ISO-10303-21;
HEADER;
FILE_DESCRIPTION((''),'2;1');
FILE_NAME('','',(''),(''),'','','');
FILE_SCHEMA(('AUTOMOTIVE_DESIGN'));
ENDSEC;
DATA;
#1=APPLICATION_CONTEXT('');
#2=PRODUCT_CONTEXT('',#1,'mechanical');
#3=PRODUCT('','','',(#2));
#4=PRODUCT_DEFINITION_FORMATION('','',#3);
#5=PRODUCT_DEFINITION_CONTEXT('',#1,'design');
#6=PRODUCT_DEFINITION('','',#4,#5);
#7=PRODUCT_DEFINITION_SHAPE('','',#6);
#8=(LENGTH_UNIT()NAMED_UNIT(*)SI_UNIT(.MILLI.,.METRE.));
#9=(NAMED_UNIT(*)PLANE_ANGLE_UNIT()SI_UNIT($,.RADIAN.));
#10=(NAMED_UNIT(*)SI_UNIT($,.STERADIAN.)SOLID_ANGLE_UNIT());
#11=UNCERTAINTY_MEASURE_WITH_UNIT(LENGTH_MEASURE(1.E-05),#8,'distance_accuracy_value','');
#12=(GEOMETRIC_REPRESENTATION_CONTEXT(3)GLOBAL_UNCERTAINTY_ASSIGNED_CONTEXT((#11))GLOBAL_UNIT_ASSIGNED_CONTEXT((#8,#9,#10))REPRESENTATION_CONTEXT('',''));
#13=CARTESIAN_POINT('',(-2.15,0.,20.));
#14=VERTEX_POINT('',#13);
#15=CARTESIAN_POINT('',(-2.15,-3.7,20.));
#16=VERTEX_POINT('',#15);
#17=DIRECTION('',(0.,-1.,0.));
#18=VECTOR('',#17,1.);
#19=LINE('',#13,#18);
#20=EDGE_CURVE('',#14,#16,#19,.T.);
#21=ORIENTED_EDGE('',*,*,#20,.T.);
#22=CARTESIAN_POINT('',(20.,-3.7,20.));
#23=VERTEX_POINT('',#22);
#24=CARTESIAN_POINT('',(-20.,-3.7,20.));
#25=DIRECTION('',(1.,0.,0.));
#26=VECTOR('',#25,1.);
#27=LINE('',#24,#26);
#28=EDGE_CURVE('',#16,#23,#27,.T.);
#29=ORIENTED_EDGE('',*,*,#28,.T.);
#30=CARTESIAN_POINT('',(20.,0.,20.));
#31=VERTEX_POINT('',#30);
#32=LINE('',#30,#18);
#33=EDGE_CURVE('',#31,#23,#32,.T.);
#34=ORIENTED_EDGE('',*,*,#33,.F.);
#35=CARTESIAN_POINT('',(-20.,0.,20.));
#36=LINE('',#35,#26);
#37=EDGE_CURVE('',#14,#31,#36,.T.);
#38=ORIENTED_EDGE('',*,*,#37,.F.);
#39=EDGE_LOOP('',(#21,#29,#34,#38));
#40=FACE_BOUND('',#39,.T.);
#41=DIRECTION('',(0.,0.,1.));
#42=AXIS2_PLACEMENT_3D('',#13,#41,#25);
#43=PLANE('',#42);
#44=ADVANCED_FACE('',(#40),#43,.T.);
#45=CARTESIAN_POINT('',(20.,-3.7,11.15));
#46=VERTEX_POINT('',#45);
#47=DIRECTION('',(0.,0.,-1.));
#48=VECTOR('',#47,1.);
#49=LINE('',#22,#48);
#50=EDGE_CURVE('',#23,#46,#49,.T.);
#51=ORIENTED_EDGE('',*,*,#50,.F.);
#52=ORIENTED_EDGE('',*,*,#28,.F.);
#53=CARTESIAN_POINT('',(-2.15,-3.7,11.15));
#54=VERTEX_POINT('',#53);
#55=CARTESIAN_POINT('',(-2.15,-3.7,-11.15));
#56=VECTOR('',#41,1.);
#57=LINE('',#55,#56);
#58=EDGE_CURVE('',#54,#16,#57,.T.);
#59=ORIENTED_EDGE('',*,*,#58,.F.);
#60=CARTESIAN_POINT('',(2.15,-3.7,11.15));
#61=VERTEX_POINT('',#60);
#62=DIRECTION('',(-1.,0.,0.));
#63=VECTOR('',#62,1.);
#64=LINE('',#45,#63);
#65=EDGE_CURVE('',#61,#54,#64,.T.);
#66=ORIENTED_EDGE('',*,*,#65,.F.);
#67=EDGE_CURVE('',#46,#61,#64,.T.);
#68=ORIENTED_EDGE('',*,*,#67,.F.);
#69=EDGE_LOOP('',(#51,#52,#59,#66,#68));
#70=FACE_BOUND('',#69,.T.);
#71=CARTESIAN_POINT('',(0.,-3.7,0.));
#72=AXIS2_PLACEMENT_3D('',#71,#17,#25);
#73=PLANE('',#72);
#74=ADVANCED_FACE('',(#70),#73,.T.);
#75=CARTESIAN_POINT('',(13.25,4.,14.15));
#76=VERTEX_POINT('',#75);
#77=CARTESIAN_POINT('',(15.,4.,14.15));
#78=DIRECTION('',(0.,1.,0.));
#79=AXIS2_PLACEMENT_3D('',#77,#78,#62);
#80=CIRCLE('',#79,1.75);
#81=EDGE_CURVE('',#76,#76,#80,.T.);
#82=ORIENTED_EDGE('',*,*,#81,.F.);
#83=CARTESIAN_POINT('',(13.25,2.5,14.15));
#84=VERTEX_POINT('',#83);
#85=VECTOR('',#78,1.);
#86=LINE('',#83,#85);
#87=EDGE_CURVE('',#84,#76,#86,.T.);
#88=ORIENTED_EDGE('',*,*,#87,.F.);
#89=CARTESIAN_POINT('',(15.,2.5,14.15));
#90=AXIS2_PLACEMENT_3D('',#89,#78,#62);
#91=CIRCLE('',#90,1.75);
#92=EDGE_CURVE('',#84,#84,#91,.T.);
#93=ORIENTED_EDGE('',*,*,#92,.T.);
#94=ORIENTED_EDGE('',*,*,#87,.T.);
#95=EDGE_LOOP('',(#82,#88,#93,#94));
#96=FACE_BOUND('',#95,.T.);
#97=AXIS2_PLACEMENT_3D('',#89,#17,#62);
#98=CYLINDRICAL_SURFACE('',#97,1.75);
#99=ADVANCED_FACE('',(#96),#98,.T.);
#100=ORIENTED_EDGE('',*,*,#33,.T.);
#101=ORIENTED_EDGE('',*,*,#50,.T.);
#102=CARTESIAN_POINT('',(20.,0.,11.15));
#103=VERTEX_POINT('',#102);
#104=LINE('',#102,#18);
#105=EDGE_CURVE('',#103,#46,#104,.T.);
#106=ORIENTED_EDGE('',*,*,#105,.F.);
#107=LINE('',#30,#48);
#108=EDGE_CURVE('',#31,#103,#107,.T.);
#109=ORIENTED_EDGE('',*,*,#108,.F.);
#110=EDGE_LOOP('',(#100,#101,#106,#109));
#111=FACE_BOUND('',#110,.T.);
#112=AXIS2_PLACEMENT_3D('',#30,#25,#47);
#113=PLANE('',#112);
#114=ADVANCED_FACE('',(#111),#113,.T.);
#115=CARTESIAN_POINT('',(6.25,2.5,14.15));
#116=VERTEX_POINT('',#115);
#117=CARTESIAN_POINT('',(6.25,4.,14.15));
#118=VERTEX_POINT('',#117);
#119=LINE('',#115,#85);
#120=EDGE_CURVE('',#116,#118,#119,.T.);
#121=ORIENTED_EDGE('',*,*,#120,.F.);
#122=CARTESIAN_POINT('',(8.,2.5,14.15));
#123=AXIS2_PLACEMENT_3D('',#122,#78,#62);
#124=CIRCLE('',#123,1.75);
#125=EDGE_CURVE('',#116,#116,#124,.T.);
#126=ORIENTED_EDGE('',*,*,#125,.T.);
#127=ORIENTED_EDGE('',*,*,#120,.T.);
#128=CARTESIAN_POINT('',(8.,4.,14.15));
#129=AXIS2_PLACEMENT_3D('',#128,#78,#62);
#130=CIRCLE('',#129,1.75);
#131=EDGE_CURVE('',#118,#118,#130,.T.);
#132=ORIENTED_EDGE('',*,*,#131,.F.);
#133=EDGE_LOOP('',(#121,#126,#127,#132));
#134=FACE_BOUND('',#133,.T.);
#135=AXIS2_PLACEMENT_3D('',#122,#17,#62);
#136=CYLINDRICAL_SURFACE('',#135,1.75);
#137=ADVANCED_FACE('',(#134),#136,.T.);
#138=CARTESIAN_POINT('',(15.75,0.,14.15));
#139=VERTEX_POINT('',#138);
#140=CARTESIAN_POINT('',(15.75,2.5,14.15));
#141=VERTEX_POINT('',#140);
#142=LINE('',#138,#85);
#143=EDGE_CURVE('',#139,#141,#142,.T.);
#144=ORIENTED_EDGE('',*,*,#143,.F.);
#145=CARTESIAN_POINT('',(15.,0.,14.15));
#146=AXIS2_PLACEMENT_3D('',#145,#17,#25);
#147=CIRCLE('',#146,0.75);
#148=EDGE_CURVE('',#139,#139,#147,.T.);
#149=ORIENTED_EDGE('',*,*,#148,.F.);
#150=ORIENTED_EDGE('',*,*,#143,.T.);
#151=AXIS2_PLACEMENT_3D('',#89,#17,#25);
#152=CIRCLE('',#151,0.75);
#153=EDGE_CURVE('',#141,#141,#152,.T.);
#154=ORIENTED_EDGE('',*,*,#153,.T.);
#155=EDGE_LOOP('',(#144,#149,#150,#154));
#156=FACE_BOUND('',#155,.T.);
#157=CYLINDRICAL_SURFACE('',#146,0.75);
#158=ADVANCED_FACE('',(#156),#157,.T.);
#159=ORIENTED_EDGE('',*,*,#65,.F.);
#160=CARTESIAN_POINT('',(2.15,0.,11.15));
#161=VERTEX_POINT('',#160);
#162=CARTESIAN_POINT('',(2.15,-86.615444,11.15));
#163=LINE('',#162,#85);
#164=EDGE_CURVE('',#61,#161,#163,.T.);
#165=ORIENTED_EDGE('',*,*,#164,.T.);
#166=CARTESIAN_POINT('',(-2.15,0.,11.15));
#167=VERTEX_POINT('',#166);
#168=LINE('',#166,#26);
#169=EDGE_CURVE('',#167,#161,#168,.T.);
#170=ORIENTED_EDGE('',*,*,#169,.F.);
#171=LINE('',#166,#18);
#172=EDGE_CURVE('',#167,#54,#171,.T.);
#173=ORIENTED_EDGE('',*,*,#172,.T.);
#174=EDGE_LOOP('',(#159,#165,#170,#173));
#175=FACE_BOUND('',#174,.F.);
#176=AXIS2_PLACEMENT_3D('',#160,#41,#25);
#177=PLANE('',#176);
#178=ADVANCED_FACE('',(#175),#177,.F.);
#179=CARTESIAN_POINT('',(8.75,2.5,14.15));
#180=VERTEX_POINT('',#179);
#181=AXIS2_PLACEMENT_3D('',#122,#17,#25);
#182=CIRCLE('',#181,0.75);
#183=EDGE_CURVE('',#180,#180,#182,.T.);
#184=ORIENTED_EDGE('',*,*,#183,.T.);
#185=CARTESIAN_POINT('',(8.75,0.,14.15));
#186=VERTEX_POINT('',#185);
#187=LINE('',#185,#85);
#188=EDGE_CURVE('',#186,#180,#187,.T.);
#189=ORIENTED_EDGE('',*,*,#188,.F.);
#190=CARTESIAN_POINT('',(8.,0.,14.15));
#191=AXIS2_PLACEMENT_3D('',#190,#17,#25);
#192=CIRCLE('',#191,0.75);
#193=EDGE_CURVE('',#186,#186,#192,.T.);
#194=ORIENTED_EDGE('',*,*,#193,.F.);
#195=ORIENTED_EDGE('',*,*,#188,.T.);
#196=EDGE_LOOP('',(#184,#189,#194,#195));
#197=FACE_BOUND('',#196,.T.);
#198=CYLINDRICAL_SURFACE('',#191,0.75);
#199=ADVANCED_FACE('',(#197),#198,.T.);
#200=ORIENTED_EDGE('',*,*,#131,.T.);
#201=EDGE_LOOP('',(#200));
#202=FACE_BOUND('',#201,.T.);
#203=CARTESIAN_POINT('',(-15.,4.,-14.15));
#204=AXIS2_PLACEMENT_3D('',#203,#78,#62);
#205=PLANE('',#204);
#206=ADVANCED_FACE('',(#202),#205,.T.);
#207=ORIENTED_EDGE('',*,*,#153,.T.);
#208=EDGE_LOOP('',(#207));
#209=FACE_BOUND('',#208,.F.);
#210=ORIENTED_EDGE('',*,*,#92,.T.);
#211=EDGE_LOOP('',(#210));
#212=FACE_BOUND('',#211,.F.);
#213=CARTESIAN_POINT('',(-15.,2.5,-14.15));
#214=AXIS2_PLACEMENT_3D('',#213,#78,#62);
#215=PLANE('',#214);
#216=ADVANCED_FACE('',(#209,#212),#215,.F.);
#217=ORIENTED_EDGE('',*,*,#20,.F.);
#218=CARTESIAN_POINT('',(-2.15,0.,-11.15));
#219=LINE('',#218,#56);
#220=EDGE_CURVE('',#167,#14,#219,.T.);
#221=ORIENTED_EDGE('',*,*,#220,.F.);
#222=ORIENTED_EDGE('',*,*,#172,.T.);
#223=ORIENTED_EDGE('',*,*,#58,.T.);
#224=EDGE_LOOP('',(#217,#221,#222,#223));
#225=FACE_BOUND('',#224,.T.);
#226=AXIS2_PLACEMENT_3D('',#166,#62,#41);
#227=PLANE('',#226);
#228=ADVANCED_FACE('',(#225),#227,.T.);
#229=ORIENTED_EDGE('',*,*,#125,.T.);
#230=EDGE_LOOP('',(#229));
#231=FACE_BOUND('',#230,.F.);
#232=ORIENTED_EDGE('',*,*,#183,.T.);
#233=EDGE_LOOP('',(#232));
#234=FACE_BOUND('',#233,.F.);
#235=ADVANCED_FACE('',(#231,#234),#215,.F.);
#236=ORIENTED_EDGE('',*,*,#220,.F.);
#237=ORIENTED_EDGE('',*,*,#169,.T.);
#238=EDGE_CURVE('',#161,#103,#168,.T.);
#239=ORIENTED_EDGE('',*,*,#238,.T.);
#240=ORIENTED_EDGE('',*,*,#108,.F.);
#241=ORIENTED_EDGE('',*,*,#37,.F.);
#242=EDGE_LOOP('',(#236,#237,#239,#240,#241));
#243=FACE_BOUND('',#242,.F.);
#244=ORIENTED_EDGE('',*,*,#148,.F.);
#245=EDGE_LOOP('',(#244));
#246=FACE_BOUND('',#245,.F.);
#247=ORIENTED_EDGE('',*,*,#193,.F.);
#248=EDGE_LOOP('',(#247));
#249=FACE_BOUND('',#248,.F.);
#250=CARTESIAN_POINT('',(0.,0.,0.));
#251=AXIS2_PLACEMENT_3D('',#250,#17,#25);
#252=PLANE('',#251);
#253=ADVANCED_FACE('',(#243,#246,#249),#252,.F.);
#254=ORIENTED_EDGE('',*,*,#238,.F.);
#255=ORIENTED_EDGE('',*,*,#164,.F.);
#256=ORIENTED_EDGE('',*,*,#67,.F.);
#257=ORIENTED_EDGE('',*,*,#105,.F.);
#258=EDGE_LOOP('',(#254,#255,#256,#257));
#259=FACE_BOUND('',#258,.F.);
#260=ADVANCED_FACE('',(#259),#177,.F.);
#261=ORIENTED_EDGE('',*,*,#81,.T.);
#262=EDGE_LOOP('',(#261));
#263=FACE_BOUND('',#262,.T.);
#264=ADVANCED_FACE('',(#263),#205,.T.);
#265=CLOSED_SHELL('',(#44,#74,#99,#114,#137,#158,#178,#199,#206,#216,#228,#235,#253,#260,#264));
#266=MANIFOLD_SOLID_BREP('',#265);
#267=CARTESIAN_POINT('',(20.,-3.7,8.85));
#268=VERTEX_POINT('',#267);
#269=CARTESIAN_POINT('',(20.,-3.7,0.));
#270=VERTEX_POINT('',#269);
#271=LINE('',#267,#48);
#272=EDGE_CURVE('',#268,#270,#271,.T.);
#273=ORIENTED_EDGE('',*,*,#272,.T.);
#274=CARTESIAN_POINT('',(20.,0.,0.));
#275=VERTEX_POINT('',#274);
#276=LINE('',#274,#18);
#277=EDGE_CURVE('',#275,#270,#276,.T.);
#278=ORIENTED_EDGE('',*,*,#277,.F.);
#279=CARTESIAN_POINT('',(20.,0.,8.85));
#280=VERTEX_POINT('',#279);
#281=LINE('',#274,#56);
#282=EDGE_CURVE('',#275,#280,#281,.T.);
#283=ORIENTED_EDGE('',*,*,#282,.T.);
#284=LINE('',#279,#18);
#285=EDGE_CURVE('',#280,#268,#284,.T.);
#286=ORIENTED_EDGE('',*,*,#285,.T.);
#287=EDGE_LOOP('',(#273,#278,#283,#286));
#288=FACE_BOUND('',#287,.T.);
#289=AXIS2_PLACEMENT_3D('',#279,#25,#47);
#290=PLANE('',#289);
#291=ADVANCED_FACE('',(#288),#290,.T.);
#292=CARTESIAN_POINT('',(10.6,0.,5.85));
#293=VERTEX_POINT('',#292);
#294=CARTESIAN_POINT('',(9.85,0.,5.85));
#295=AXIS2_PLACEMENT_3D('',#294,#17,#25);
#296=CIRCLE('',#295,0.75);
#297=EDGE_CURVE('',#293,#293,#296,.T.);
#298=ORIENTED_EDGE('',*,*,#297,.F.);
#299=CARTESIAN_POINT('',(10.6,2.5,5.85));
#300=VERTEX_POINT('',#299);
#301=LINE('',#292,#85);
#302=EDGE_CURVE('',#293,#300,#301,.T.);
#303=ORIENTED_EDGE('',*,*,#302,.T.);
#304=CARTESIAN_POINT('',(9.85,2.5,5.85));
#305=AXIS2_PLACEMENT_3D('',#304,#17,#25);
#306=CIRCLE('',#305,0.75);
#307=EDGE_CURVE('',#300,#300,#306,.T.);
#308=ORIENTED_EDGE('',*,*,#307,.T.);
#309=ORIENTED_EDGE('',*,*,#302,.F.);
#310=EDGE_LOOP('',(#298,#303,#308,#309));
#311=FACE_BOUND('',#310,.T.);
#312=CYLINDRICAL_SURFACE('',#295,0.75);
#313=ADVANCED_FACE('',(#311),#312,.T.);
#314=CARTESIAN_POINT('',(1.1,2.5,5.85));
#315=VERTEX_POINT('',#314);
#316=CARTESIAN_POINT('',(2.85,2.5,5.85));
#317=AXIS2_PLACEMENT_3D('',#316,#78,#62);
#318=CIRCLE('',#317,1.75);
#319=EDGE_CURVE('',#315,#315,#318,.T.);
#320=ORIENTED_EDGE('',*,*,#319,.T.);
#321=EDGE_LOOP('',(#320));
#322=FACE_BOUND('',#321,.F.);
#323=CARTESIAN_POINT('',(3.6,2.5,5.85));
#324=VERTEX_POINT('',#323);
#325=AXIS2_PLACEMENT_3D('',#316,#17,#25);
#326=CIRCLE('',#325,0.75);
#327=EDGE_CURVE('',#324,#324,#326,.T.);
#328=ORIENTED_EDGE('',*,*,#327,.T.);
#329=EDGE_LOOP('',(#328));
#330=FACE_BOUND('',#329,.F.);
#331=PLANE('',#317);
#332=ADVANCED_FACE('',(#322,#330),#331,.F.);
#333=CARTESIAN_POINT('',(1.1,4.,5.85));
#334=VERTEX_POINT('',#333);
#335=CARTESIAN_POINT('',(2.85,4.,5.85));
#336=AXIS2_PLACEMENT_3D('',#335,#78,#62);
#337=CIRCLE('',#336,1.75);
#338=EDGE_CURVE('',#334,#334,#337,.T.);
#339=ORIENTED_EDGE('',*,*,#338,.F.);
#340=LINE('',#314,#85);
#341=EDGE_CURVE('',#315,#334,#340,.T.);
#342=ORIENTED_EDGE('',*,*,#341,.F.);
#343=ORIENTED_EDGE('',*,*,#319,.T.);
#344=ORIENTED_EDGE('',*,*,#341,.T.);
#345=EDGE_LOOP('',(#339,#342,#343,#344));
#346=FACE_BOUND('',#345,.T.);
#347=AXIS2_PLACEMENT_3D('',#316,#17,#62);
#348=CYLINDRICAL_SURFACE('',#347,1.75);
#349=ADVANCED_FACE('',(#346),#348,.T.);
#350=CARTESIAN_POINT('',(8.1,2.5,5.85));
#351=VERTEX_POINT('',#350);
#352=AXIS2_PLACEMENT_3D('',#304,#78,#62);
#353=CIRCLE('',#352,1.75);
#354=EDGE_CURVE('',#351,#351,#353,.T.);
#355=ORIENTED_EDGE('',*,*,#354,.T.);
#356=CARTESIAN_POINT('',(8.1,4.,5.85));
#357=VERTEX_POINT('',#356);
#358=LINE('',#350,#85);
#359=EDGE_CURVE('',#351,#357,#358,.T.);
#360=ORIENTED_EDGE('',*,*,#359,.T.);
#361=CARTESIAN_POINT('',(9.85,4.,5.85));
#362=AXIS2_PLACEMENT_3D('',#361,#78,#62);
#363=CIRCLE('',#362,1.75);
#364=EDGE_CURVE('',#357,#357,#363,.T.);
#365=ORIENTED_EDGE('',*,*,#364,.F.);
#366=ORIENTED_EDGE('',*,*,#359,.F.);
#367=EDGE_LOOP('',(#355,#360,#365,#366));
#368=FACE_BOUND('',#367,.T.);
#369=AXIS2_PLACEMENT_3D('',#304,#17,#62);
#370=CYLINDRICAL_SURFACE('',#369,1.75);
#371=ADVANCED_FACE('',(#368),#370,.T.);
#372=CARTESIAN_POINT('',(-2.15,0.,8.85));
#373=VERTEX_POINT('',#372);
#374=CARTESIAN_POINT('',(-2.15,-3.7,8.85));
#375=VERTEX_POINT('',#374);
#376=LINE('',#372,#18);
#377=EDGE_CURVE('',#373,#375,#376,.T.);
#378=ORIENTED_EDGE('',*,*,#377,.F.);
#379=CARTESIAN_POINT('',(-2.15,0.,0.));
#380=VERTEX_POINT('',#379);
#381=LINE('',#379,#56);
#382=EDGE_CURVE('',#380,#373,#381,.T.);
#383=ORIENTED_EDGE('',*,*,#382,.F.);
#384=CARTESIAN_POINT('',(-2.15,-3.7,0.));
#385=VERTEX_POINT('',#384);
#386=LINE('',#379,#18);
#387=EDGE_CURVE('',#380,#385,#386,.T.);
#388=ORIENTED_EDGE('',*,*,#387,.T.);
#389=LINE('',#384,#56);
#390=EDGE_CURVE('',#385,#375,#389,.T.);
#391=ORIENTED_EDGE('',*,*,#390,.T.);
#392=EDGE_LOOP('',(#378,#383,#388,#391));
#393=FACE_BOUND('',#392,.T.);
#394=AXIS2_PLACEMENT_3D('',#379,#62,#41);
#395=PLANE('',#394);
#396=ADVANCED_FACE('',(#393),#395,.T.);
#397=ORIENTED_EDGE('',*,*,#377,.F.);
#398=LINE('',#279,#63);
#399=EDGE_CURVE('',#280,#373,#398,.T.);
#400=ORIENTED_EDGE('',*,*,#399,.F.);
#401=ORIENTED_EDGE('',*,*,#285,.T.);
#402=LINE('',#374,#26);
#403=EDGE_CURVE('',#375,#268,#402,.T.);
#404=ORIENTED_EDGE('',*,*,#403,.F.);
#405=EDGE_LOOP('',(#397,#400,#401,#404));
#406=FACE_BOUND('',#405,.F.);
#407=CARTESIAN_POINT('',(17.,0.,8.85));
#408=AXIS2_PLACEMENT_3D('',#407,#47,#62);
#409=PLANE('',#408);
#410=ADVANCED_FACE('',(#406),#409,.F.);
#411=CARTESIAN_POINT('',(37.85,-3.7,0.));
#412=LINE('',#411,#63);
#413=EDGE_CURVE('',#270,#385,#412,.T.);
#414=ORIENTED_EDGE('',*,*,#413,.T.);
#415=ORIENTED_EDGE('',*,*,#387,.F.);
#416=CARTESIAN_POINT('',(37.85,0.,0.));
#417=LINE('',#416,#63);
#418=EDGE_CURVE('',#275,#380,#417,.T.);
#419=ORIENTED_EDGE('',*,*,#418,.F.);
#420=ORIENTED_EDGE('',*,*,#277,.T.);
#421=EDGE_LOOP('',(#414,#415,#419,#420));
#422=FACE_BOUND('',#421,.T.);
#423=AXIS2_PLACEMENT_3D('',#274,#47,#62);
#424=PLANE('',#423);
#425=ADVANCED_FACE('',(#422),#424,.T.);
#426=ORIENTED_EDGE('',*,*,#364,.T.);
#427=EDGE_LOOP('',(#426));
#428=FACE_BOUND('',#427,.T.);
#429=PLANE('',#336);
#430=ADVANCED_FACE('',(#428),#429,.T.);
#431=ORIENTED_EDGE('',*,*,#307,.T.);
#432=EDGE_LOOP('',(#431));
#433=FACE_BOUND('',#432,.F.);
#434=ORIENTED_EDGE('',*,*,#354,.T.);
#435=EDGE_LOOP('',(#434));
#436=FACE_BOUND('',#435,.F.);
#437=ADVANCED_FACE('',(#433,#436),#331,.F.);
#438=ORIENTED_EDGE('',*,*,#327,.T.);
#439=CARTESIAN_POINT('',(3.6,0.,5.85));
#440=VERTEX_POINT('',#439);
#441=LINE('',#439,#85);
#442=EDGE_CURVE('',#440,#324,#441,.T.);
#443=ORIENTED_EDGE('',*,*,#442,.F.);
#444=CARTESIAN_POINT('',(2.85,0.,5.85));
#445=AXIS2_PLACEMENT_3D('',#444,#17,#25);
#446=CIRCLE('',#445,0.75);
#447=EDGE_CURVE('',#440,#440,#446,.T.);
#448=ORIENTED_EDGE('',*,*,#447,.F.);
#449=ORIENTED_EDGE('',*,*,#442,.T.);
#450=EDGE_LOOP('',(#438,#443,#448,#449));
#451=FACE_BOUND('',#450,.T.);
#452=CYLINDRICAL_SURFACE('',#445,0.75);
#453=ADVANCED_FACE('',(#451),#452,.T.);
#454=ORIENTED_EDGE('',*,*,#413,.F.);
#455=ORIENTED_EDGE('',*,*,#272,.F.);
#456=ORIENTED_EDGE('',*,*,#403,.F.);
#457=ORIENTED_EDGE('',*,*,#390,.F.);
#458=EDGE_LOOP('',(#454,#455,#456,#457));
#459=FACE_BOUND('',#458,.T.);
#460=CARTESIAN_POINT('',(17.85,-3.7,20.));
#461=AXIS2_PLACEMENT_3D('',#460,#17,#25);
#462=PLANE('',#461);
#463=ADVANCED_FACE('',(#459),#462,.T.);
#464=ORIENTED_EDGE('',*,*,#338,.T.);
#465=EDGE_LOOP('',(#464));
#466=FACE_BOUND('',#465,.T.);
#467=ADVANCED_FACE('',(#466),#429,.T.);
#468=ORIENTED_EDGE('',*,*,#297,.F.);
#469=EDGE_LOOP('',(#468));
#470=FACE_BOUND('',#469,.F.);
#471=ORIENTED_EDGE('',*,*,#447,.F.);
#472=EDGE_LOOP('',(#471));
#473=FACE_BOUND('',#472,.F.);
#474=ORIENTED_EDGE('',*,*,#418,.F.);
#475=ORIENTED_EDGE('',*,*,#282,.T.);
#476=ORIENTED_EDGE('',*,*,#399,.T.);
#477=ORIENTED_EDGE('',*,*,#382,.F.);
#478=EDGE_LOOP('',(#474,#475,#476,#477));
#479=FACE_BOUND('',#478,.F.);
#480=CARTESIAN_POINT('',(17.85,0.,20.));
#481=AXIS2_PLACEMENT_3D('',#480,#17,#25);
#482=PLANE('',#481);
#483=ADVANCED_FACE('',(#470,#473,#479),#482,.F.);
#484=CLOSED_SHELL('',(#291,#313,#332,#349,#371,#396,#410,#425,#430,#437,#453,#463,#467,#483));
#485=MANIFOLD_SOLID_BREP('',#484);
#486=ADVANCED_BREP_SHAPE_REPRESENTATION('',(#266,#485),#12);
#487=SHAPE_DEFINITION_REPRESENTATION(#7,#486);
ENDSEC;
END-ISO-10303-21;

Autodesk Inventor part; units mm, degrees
ref_plane "YZ Plane" through (0, 0, 0) normal (1, 0, 0) x (0, 1, 0)
ref_plane "XZ Plane" through (0, 0, 0) normal (0, 1, 0) x (-1, 0, 0)
ref_plane "XY Plane" through (0, 0, 0) normal (0, 0, 1) x (1, 0, 0)
sketch "Sketch1" plane through (0, 0, 0) normal (0, 1, 0) x (-1, 0, 0)
  line L0 (-2.15, 11.15) -> (2.15, 11.15)
  line L1 (2.15, 11.15) -> (2.15, -11.15)
  line L2 (2.15, -11.15) -> (-2.15, -11.15)
  line L3 (-2.15, -11.15) -> (-2.15, 11.15)
  line L4 (-2.15, 11.15) -> (2.15, -11.15) construction
  line L5 (2.15, 11.15) -> (-2.15, -11.15) construction
  line L6 (-20, 20) -> (20, 20)
  line L7 (20, 20) -> (20, -20)
  line L8 (20, -20) -> (-20, -20)
  line L9 (-20, -20) -> (-20, 20)
  line L10 (-20, 20) -> (20, -20) construction
  line L11 (20, 20) -> (-20, -20) construction
  line L12 (2.15, -11.15) -> (-20, -11.15)
  line L13 (2.15, 11.15) -> (2.15, -20)
  line L14 (-2.15, 11.15) -> (20, 11.15)
  line L15 (-2.15, -11.15) -> (-2.15, 20)
  line L16 (2.15, -11.15) -> (-0.85, -11.15)
  line L17 (2.15, -14.15) -> (2.15, -11.15)
  point P0 (0, 0)
  dimension "d0" = 4.3
  dimension "d1" = 22.3
  dimension "d2" = 40
  dimension "d3" = 40
extrude "Extrusion1" add sketch "Sketch1" along normal blind 3.7 contours L15 L6 L7 L14 L0 | L2 L13 L8 L9 L12
sketch "Sketch6" plane through (0, 0, 0) normal (0, 1, 0) x (-1, 0, 0)
  line L0 (-20, -16.15) -> (-20, -11.15)
  circle A0 centre (-15, -14.15) radius 0.75
  circle A1 centre (-8, -14.15) radius 0.75
  line L1 (-2.15, 11.15) -> (20, 11.15) projected
  circle A2 centre (15, 14.15) radius 0.75
  circle A3 centre (8, 14.15) radius 0.75
  point P0 (0, 0)
  dimension "d58" = 1.5
  dimension "d59" = 1.5
  dimension "d64" = 1.5
  dimension "d76" = 1.5
extrude "Extrusion5" add sketch "Sketch6" against normal blind 2.5
sketch "Sketch9" plane through (15, -2.5, -14.15) normal (0, -1, 0) x (1, 0, 0)
  circle A0 centre (0, 0) radius 0.75 projected
  circle A1 centre (0, 0) radius 1.75
  circle A2 centre (-7, 0) radius 0.75 projected
  circle A3 centre (-7, 0) radius 1.75
  circle A4 centre (-23, 28.3) radius 0.75 projected
  circle A5 centre (-23, 28.3) radius 1.75
  circle A6 centre (-30, 28.3) radius 0.75 projected
  circle A7 centre (-30, 28.3) radius 1.75
  point P0 (-15, 14.15)
  dimension "d77" = 3.5
  dimension "d78" = 3.5
  dimension "d79" = 3.5
  dimension "d80" = 3.5
extrude "Extrusion8" add sketch "Sketch9" along normal blind 1.5 contours A0 | A1 | A2 | A3 | A4 | A5 | A6 | A7
move or copy body "Move Body1" bodies to move or copy 1 copy no rotation origin (0, 0, 0) rotation axis (0, 0, 1) rotation angle 180
split body "Split1" sketch "Sketch1" result two bodies curves L14 first body at (6.6667, -3.2, 17.05)
move or copy body "Move Body2" bodies to move or copy 3 copy no translate (17.85, 0, 20)
properties part number "top-small"
